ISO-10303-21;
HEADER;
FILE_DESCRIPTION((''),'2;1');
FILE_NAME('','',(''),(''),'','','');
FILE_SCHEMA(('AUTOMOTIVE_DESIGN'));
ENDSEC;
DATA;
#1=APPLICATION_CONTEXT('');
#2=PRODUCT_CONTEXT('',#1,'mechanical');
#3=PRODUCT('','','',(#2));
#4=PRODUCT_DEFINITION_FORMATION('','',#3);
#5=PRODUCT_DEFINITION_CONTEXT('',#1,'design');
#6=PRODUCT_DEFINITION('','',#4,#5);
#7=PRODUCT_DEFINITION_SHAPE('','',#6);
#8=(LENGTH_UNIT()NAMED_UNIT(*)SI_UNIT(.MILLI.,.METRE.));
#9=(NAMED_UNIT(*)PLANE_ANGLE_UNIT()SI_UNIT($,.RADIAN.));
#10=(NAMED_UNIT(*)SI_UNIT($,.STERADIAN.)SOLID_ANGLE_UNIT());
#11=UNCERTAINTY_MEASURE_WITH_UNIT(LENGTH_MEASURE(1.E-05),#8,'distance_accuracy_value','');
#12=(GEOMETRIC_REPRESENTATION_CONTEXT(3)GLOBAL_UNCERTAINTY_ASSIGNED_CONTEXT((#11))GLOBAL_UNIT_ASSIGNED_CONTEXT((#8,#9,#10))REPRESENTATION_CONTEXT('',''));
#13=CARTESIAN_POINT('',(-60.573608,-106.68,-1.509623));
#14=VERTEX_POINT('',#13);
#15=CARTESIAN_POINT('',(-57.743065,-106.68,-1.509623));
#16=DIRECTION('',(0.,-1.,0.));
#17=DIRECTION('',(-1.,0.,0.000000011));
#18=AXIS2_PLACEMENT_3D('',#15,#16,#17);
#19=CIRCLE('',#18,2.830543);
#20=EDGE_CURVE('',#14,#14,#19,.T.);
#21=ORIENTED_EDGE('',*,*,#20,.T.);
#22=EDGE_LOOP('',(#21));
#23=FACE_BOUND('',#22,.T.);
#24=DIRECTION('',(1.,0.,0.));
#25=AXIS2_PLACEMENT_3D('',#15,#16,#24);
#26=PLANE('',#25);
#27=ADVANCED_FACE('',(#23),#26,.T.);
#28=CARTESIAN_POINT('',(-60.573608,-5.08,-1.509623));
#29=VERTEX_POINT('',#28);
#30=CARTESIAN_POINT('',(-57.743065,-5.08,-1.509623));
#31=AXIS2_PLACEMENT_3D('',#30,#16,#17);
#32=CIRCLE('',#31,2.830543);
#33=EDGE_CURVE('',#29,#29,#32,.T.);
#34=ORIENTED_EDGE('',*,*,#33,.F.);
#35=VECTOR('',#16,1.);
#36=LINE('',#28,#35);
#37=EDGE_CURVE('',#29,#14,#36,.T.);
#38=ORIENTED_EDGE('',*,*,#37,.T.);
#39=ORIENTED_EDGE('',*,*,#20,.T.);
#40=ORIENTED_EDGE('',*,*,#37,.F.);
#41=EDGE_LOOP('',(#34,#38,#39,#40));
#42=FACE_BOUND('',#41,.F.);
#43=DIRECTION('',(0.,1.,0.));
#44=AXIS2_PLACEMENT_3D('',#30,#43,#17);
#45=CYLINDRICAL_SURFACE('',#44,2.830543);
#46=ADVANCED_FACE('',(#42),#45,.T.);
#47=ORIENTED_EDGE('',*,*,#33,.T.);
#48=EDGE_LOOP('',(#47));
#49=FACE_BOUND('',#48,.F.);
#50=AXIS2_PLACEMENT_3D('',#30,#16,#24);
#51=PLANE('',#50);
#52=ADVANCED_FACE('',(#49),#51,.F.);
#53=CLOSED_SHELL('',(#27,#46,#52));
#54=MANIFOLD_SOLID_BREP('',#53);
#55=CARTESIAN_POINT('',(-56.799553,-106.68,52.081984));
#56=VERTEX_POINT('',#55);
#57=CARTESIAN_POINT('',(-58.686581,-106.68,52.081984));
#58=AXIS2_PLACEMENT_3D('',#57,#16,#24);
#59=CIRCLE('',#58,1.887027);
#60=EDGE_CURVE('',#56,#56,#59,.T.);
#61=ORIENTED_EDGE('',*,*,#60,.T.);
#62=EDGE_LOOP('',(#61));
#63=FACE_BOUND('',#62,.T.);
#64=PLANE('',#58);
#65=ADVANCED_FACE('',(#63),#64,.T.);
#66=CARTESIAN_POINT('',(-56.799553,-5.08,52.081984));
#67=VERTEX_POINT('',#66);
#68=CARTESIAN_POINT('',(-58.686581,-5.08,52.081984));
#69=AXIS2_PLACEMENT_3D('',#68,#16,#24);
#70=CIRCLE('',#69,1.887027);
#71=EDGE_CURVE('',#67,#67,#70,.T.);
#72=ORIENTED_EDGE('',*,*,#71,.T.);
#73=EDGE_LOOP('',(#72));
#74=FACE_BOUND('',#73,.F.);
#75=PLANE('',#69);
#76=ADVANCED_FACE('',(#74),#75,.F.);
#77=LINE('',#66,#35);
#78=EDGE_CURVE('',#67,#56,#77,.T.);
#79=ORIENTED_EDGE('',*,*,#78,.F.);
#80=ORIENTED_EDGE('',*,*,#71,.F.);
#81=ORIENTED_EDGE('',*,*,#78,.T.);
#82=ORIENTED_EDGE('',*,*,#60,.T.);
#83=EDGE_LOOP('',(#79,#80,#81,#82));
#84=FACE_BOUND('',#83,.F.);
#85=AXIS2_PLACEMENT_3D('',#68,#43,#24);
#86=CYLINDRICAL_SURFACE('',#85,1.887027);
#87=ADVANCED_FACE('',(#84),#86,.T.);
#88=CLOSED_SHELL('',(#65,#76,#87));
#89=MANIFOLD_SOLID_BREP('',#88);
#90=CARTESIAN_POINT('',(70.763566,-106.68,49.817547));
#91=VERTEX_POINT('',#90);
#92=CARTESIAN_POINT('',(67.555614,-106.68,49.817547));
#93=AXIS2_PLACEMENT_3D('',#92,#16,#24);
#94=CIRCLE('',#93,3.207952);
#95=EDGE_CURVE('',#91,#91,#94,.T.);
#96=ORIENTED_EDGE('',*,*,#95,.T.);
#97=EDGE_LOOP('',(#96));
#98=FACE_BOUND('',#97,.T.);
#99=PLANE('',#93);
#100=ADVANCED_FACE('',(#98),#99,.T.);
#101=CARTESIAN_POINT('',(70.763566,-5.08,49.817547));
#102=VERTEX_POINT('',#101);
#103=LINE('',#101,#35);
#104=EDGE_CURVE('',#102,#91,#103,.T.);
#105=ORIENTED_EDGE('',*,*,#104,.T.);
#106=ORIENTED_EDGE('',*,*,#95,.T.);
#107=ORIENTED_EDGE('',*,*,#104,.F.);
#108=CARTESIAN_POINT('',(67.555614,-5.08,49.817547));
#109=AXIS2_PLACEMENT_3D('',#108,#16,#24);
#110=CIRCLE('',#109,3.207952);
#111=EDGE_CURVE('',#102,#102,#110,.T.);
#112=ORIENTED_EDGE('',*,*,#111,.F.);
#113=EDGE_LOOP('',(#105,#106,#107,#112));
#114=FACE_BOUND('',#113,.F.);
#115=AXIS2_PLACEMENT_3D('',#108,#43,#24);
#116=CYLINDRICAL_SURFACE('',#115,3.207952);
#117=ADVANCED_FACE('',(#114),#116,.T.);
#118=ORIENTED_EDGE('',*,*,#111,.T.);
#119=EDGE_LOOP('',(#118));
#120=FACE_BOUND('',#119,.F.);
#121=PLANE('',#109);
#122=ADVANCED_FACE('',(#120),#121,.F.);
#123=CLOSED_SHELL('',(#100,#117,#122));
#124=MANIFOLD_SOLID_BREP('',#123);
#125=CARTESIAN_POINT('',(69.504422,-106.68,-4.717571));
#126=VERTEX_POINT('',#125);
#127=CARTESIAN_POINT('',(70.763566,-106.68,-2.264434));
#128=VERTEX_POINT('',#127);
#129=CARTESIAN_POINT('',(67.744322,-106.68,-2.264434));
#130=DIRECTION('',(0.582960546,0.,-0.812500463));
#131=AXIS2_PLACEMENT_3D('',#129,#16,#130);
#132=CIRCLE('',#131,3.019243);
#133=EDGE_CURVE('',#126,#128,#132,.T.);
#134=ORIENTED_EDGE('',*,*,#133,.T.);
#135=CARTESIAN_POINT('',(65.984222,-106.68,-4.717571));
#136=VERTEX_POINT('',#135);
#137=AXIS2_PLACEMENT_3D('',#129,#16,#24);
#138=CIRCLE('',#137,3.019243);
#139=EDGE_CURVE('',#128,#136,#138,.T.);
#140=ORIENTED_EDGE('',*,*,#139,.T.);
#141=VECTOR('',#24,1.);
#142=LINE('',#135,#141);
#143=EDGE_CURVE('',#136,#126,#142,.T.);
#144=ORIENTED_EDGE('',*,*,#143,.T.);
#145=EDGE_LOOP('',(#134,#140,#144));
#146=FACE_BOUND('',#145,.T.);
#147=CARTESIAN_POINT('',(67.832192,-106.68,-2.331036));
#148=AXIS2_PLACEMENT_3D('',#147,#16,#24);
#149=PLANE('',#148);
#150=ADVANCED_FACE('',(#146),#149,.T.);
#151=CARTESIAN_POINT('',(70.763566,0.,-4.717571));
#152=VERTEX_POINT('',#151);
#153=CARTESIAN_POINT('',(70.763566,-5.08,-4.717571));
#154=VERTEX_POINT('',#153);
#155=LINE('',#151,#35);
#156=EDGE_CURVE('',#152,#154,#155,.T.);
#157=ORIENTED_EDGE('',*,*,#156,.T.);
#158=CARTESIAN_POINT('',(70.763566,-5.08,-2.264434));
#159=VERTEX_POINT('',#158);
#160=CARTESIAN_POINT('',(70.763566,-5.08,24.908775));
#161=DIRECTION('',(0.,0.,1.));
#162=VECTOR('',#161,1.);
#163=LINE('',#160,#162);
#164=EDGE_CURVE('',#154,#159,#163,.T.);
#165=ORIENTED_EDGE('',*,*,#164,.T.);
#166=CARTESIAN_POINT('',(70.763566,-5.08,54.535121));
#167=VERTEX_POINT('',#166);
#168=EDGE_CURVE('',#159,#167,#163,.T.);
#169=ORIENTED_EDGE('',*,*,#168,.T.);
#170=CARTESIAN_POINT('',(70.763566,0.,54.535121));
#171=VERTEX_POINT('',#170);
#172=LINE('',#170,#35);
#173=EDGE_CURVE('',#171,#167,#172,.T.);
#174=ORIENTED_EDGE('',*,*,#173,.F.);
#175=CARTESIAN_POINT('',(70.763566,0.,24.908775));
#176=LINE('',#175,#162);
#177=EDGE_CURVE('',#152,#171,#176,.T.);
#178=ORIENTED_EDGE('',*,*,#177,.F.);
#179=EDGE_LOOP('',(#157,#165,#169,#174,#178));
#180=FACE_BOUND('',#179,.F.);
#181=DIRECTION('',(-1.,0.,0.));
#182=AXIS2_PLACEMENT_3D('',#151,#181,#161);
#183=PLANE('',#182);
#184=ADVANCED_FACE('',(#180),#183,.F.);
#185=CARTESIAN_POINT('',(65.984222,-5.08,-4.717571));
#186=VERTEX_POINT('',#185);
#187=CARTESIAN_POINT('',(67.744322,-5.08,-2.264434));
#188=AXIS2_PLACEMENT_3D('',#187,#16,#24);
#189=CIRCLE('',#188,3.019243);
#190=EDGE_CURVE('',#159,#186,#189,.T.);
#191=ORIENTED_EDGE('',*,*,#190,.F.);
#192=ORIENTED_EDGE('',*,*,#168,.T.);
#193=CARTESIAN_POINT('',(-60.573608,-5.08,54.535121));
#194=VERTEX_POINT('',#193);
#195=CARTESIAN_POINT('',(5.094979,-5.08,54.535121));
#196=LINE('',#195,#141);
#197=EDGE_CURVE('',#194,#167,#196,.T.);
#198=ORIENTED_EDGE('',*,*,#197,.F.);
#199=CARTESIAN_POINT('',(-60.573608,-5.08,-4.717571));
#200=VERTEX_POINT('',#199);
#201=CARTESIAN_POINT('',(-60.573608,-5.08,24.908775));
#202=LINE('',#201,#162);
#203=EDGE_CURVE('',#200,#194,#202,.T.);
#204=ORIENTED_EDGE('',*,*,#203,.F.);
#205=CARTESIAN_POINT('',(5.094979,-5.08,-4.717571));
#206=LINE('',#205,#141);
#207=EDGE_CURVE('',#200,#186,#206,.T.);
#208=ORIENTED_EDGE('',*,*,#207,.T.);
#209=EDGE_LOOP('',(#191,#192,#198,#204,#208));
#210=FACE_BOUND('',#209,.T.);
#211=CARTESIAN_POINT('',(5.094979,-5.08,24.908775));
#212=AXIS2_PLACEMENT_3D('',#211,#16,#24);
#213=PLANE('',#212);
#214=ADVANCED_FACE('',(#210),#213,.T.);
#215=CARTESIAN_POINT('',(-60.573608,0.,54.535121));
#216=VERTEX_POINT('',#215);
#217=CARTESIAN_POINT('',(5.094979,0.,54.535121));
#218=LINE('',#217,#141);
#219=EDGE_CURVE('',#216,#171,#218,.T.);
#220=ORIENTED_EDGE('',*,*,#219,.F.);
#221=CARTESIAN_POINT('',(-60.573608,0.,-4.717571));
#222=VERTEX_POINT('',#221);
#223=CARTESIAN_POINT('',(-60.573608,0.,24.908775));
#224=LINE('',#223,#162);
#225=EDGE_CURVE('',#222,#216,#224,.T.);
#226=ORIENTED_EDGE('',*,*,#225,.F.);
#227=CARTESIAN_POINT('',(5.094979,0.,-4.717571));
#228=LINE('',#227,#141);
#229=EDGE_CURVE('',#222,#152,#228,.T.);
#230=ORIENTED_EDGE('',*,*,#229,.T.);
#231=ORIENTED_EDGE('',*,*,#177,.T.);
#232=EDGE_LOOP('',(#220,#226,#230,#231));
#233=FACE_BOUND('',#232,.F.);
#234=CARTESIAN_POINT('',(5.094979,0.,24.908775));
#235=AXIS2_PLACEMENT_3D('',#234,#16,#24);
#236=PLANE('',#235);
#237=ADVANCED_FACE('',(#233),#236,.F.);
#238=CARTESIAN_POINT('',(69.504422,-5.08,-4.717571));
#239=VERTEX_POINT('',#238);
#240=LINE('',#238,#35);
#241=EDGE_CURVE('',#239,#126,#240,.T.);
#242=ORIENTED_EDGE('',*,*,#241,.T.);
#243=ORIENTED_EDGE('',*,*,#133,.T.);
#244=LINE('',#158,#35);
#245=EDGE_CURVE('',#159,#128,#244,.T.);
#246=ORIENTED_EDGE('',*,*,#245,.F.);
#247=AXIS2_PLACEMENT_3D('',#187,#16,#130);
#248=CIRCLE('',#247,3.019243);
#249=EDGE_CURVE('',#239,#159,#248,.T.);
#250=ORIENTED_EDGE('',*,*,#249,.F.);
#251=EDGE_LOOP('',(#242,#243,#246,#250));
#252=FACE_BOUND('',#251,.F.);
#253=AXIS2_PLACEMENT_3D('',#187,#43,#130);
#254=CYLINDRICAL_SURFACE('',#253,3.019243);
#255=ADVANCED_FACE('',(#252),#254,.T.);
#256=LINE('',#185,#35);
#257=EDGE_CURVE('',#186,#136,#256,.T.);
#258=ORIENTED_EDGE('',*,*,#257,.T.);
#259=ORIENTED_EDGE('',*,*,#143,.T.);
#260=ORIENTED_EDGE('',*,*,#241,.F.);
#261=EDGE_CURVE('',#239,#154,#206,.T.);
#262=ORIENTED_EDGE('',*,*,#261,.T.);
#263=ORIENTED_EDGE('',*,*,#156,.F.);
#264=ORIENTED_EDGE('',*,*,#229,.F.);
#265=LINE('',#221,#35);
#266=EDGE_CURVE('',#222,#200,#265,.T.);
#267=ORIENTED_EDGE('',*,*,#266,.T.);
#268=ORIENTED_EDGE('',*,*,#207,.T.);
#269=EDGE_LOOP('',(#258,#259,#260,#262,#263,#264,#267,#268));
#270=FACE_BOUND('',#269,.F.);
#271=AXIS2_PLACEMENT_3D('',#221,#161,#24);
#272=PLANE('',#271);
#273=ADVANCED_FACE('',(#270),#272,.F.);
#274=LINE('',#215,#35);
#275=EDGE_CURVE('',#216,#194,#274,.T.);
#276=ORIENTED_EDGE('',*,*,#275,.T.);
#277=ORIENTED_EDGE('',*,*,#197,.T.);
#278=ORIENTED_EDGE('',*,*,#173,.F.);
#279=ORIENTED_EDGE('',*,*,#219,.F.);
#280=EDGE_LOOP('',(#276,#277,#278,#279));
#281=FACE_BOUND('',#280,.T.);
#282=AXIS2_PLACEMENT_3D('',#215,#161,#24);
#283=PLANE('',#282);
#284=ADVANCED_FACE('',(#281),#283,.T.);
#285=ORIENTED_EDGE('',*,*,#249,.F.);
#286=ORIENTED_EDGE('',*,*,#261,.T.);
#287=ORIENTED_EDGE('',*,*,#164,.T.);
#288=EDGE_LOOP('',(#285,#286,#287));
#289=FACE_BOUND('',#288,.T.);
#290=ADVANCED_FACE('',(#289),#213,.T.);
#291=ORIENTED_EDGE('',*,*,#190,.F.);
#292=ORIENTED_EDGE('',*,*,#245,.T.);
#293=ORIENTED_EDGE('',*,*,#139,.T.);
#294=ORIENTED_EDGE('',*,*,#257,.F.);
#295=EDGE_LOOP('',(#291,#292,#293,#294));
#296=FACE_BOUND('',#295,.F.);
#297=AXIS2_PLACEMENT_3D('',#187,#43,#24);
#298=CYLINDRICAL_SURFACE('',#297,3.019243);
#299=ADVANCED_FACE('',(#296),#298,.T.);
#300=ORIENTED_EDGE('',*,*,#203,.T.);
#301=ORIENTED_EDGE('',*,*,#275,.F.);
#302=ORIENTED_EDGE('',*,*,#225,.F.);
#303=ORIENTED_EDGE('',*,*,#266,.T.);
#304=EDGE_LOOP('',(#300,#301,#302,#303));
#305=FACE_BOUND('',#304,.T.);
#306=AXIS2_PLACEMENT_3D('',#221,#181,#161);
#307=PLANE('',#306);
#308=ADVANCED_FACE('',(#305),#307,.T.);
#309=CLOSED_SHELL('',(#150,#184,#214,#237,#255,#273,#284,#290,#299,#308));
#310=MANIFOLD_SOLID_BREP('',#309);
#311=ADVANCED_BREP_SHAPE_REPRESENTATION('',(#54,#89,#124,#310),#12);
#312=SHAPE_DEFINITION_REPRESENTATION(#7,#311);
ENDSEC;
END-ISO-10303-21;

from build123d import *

# Parameters (mm, degrees)
F0_W     = 131.3371732831
F0_H     = 59.2526914552
F1_DEPTH = 5.08
F3_DEPTH = 101.6
F2_R     = 3.2079517841


with BuildPart() as f1:
    # F0 (on Front) → F1 (new body)
    with BuildSketch(Plane.XZ):
        with Locations((5.0949789584, 24.908774998)):
            Rectangle(F0_W, F0_H)
    extrude(amount=F1_DEPTH)

    # F2 (on face) → F3, piece 4 (join)
    with BuildSketch(Plane.XZ.offset(5.08)):
        with BuildLine():
            ThreePointArc((70.7635655999, -2.2644340061), (66.3656159776, 0.4216413008), (65.9842222944, -4.7175707296))
            Line((65.9842222944, -4.7175707296), (69.5044219479, -4.7175707296))
            ThreePointArc((69.5044219479, -4.7175707296), (70.430397428, -3.6431401496), (70.7635655999, -2.2644340061))
        make_face()
    extrude(amount=F3_DEPTH)


with BuildPart() as f3:
    # F2 (on face) → F3 (new body)
    with BuildSketch(Plane.XZ.offset(5.08)):
        with BuildLine():
            ThreePointArc((-60.5736076832, 52.0819835365), (-58.6865805089, 50.1949563622), (-56.7995533347, 52.0819835365))
            ThreePointArc((-56.7995533347, 52.0819835365), (-58.6865805089, 53.9690107107), (-60.5736076832, 52.0819835365))
        make_face()
    extrude(amount=F3_DEPTH)


with BuildPart() as f3b:
    # F2 (on face) → F3, piece 2 (new body)
    with BuildSketch(Plane.XZ.offset(5.08)):
        with BuildLine():
            ThreePointArc((-54.9125224352, -1.5096226707), (-57.7430650433, 1.3209199533), (-60.5736076832, -1.509622639))
            ThreePointArc((-60.5736076832, -1.509622639), (-57.7430650751, -4.3401652947), (-54.9125224352, -1.5096226707))
        make_face()
    extrude(amount=F3_DEPTH)


with BuildPart() as f3c:
    # F2 (on face) → F3, piece 3 (new body)
    with BuildSketch(Plane.XZ.offset(5.08)):
        with Locations((67.5556138158, 49.8175472021)):
            Circle(F2_R)
    extrude(amount=F3_DEPTH)


solid = Compound([f1.part, f3.part, f3b.part, f3c.part])
